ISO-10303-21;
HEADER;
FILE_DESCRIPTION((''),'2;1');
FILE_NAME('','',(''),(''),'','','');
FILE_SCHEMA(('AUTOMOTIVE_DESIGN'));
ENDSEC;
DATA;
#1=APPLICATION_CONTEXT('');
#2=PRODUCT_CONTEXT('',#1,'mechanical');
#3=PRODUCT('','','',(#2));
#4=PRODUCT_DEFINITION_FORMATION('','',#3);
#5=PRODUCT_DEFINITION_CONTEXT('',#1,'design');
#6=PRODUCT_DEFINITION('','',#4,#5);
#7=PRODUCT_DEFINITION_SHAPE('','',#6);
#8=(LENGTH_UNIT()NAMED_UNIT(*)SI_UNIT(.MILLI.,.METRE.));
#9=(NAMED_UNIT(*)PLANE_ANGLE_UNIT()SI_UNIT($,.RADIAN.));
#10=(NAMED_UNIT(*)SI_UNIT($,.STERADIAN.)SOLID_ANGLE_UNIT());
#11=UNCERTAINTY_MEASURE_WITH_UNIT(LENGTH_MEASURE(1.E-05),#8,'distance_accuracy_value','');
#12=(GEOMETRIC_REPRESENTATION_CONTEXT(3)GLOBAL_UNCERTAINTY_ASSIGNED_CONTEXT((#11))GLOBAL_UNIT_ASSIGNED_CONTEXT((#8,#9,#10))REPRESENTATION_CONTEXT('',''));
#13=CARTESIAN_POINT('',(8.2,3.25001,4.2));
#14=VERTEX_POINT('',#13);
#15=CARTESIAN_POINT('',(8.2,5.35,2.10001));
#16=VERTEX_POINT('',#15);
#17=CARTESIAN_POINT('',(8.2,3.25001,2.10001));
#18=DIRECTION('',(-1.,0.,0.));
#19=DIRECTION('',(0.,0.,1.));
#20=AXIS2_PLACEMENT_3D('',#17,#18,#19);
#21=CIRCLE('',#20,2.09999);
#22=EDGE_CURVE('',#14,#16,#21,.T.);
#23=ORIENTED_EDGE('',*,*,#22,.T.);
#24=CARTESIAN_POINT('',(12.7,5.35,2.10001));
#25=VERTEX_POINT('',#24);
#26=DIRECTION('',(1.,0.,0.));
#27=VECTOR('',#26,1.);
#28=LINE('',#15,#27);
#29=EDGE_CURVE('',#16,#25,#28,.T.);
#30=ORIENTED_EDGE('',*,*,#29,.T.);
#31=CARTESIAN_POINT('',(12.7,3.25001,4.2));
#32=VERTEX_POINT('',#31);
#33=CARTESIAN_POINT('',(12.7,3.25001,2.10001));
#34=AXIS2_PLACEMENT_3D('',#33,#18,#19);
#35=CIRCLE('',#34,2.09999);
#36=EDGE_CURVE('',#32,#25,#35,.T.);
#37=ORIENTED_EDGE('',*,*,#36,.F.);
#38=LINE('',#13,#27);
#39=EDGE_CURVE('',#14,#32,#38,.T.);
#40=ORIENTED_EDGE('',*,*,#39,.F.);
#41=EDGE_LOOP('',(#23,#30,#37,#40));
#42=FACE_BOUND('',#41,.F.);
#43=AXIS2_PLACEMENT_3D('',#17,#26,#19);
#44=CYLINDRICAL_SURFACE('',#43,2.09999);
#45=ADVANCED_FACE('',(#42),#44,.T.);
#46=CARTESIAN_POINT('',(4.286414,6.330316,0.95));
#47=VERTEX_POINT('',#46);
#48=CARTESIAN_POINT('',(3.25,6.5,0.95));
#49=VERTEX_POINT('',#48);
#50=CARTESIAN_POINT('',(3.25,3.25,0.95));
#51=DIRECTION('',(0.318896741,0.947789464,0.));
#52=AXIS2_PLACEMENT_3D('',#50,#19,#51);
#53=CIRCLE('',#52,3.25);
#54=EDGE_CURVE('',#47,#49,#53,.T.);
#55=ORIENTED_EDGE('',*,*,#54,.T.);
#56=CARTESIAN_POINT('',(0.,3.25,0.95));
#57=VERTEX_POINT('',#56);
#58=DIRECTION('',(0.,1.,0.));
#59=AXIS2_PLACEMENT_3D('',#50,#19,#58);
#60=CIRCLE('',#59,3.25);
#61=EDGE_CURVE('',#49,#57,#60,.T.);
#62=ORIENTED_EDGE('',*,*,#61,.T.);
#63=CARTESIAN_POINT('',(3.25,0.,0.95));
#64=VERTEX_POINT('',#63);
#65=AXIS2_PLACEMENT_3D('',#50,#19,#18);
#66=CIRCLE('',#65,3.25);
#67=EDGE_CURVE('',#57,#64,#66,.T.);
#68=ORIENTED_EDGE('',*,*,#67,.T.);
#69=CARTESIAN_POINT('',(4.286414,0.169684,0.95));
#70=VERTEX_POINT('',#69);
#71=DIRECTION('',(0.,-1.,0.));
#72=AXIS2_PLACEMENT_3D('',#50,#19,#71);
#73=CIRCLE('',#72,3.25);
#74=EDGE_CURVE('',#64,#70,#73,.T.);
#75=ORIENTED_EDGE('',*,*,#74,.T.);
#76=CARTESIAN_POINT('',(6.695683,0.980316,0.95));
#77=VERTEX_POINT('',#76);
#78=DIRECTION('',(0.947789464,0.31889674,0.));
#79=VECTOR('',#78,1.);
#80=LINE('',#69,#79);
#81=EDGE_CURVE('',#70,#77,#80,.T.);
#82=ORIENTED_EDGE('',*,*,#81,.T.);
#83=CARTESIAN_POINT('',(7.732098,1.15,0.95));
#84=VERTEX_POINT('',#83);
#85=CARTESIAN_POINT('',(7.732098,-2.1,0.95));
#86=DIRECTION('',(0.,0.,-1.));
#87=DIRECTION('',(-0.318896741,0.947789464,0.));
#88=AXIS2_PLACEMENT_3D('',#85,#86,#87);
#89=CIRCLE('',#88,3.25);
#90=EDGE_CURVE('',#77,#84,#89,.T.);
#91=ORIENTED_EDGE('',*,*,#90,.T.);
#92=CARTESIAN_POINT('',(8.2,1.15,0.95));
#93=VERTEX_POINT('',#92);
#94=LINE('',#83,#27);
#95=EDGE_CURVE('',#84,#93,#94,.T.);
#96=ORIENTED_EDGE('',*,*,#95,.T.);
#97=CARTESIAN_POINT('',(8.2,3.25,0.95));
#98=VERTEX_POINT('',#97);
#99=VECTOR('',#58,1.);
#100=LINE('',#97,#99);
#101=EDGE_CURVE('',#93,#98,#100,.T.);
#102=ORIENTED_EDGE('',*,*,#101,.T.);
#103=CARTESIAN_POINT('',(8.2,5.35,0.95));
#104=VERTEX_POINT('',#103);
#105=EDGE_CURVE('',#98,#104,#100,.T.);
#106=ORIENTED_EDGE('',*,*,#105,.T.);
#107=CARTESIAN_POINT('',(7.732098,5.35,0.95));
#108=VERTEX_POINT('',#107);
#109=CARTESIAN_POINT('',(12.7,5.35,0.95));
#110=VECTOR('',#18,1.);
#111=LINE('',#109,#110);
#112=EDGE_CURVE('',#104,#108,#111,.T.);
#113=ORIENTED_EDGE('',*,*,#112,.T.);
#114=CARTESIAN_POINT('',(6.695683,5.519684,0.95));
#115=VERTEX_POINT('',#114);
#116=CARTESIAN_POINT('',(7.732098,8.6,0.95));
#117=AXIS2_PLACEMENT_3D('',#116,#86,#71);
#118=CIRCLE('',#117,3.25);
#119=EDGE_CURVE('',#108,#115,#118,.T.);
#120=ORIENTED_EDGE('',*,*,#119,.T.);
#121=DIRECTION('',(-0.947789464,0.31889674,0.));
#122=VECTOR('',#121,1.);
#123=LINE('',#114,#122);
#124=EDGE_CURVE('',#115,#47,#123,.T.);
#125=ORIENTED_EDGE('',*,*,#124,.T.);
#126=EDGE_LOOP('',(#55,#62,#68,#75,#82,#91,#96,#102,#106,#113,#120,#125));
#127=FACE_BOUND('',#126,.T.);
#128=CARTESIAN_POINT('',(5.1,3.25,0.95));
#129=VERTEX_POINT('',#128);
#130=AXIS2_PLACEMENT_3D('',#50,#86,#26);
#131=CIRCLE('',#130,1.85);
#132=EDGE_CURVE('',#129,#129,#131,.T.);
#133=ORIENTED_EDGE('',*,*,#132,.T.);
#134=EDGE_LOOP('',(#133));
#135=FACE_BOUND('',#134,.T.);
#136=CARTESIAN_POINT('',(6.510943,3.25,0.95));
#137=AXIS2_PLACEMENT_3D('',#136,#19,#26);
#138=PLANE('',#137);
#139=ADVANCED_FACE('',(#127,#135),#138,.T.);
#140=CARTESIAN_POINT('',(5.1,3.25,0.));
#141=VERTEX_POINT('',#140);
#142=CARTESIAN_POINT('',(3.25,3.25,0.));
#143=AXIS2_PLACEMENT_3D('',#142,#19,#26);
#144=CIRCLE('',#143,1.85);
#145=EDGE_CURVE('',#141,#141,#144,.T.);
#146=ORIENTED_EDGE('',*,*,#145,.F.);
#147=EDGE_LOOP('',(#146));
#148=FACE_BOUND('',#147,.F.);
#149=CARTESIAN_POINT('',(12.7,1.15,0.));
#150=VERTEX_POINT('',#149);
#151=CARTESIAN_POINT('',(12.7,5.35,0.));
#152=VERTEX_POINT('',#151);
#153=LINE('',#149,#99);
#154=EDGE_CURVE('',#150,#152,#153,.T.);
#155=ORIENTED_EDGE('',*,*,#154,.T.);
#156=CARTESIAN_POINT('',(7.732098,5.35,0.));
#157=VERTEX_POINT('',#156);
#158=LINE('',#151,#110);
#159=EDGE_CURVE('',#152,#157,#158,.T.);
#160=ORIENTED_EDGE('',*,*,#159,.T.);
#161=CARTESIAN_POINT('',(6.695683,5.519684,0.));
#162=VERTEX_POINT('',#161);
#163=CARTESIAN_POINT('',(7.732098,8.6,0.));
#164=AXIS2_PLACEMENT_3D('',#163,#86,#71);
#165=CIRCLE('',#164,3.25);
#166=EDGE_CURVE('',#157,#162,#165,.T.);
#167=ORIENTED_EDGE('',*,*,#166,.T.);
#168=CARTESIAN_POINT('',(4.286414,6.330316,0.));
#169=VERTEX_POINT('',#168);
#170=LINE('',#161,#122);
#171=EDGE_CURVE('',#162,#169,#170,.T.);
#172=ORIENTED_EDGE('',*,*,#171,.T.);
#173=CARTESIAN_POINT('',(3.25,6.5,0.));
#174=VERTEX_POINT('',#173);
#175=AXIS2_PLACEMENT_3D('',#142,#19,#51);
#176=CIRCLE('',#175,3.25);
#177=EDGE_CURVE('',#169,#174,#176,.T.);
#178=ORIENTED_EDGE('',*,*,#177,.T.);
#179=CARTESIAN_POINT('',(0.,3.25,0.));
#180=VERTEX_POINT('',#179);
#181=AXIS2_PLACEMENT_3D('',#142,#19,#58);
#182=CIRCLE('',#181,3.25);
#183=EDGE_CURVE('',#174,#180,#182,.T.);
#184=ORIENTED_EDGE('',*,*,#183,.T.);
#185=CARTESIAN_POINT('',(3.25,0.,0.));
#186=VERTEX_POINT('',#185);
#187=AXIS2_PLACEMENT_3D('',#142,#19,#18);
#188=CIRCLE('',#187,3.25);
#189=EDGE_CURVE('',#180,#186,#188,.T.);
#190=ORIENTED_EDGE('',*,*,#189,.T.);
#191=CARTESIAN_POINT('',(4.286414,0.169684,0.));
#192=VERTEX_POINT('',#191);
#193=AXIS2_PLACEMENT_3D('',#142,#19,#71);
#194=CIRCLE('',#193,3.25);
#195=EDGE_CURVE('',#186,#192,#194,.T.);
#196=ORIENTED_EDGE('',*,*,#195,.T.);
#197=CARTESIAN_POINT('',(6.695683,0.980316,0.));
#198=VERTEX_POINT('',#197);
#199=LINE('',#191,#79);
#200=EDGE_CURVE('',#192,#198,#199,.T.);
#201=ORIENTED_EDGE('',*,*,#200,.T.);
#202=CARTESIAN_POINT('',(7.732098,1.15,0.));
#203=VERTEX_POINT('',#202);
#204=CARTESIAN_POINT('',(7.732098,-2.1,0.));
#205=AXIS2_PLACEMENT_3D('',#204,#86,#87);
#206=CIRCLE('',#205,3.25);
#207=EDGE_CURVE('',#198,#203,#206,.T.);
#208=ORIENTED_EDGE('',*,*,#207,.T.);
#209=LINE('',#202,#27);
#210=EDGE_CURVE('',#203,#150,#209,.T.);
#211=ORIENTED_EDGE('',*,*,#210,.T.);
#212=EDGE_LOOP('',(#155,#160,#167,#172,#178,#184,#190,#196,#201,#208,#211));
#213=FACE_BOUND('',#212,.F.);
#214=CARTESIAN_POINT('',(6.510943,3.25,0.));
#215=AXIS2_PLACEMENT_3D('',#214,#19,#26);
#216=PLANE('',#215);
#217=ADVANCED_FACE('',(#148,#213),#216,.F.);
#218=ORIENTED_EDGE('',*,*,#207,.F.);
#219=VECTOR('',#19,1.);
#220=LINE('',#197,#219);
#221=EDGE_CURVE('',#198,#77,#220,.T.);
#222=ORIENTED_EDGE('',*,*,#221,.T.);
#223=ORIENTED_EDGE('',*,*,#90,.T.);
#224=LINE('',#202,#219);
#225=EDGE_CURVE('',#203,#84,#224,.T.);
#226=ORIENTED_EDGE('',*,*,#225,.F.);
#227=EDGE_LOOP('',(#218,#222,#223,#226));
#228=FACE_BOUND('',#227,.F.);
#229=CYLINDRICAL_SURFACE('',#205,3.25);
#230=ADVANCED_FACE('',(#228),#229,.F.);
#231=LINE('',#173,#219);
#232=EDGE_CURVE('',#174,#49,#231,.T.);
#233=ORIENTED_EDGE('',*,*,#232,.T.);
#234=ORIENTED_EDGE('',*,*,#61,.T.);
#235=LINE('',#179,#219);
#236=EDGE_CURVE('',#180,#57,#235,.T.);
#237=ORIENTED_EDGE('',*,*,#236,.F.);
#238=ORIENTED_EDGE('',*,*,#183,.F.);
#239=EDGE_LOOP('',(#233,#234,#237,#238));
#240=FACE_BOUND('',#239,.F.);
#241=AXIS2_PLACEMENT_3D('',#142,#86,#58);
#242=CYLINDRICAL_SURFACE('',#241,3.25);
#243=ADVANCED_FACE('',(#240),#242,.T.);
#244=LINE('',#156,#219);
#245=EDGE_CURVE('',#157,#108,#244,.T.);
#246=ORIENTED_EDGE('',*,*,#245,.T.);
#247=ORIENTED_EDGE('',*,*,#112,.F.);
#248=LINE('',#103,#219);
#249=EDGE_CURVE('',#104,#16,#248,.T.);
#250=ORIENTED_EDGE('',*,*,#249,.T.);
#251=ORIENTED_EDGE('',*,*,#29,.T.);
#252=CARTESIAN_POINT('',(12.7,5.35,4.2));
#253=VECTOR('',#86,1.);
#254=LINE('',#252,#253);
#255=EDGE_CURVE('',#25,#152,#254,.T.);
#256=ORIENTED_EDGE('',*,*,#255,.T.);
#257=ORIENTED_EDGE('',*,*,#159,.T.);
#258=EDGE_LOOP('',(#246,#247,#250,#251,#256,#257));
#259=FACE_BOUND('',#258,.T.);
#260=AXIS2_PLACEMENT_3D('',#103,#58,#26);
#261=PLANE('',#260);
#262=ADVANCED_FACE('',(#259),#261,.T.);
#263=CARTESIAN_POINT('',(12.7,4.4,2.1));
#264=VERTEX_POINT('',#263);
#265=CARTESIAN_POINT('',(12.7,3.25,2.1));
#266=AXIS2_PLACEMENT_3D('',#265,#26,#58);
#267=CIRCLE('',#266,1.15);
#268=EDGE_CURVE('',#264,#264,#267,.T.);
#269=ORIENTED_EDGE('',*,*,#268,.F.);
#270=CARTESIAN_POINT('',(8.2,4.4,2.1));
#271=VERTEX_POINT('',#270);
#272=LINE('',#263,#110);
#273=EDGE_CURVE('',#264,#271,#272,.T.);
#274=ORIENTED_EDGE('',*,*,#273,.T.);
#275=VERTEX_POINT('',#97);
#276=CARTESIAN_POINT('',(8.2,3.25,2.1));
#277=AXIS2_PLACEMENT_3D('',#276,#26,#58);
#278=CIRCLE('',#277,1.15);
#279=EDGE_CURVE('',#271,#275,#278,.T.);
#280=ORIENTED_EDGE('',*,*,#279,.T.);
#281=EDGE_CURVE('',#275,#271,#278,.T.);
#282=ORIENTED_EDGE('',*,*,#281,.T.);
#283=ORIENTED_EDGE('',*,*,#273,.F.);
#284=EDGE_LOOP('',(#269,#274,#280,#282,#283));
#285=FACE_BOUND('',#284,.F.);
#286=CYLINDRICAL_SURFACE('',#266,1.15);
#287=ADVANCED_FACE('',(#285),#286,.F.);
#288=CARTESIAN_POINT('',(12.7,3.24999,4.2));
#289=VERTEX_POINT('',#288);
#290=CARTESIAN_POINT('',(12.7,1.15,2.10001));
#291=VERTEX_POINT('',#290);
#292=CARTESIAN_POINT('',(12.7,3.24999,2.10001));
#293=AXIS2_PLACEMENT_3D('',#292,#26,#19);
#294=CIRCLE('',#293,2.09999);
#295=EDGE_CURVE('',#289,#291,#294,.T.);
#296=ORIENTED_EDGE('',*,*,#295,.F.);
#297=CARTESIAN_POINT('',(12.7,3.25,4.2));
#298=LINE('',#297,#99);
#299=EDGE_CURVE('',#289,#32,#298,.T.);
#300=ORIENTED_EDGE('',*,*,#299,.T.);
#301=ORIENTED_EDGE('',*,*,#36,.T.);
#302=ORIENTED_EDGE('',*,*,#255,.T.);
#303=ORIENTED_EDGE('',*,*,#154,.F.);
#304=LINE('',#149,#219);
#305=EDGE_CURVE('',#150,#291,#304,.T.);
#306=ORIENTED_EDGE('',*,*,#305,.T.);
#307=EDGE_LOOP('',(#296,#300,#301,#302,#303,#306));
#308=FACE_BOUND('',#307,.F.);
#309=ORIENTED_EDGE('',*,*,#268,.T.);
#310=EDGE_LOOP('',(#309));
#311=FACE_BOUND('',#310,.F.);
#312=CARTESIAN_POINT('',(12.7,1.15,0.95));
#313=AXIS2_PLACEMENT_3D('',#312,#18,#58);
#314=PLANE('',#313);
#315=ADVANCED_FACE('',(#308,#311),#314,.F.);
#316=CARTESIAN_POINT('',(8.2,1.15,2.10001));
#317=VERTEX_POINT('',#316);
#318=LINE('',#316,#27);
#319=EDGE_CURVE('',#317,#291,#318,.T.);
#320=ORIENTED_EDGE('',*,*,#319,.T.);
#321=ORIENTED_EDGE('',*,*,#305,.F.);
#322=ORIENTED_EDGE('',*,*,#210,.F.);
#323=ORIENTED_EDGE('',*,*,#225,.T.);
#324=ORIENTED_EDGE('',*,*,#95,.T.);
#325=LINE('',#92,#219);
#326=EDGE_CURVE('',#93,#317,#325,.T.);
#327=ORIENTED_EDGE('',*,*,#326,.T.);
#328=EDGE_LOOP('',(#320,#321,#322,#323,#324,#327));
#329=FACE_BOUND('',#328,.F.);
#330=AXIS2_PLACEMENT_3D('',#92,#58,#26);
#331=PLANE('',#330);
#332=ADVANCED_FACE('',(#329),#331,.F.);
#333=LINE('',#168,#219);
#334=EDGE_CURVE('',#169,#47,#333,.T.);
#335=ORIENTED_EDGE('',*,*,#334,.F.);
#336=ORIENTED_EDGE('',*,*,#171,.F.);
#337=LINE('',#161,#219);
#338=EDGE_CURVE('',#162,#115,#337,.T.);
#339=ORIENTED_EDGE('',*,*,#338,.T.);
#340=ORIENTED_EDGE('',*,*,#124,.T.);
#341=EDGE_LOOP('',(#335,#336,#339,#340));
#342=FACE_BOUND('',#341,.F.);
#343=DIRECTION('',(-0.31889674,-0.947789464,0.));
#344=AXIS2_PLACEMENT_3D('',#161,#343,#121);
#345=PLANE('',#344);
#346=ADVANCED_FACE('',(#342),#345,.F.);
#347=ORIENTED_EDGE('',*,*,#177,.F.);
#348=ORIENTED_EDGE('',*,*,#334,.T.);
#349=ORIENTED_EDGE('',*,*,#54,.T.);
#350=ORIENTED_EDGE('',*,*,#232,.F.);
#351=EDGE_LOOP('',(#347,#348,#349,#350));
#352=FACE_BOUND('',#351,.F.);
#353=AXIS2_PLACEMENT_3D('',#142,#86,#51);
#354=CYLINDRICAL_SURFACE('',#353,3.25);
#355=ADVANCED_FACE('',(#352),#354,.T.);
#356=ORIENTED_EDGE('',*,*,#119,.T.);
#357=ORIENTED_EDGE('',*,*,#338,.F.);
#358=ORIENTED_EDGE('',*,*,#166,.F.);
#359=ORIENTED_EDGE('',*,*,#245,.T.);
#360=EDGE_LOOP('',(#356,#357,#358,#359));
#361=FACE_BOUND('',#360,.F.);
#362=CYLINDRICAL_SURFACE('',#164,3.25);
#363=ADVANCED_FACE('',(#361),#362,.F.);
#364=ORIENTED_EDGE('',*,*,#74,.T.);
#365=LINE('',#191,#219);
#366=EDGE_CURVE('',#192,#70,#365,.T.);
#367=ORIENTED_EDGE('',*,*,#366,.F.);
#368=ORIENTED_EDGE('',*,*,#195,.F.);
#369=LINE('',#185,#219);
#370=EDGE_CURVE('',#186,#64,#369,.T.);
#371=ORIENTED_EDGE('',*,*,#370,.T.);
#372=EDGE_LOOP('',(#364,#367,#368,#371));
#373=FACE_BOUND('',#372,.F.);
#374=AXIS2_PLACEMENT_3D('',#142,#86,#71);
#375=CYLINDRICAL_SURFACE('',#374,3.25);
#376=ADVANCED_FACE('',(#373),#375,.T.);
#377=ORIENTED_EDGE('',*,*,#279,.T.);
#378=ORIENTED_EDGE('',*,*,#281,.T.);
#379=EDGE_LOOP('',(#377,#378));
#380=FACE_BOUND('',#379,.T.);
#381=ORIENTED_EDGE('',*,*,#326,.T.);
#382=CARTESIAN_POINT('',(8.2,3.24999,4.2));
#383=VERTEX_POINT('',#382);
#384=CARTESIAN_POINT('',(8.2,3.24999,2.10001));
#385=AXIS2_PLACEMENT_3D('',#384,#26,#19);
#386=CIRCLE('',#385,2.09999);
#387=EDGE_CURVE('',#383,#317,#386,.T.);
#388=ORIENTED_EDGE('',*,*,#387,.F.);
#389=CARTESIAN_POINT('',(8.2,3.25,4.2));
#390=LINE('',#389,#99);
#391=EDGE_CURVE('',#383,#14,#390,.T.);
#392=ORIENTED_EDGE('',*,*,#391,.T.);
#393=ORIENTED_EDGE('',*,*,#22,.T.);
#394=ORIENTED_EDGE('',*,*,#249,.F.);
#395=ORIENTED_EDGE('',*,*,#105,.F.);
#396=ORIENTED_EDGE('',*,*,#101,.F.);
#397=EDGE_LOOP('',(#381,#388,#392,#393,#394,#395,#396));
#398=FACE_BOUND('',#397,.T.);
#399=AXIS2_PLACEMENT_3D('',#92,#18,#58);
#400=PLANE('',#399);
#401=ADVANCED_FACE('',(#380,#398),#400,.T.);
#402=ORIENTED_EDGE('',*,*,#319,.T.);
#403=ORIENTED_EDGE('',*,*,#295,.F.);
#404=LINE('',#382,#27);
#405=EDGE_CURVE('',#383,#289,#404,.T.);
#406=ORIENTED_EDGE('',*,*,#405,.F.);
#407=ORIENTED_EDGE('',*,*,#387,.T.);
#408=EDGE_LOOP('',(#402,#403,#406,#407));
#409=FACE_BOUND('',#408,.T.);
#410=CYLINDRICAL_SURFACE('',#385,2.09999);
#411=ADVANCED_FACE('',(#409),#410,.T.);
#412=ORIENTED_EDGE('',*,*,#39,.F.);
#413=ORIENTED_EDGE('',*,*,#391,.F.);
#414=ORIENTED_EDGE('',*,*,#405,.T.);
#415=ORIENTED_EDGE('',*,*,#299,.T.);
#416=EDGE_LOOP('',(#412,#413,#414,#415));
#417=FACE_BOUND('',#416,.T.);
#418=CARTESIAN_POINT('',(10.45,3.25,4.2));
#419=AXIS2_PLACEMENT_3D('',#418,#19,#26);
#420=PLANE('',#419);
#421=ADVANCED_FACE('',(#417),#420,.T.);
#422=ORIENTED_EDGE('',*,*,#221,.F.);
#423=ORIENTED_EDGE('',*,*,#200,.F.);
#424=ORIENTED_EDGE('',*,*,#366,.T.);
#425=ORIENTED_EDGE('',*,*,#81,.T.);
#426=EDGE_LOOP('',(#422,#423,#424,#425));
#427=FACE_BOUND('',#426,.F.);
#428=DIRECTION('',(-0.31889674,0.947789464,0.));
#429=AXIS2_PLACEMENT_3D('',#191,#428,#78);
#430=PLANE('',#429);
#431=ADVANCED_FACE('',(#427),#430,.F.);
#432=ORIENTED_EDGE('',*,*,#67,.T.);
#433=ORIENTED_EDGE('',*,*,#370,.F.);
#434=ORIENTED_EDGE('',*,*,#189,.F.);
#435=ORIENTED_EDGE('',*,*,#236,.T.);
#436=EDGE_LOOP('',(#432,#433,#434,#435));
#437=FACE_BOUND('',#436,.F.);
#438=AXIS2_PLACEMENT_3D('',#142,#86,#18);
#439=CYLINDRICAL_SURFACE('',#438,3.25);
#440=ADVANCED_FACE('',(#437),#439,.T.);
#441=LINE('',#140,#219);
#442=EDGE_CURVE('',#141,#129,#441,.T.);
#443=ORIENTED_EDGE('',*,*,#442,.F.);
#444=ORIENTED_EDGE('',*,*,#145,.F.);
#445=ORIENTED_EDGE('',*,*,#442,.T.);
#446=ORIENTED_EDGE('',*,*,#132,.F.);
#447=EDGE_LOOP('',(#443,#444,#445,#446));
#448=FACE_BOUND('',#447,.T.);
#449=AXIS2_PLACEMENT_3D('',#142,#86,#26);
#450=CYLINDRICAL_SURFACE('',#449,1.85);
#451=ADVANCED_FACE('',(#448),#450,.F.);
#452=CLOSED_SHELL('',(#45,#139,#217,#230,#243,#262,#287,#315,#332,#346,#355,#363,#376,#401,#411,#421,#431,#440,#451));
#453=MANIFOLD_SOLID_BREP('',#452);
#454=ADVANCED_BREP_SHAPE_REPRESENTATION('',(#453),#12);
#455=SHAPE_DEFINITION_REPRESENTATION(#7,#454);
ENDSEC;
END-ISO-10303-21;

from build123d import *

# Parameters (mm, degrees)
F0_R     = 1.85
F1_DEPTH = 0.95
F2_W     = 4.5
F2_H     = 4.2
F3_DEPTH = 3.25
F4_R     = 2.09999
F5_R     = 1.15
F6_DEPTH = 25


# Not quite as in the source:
# - a fillet or chamfer is up to 0.001 mm smaller than in the source, because OpenCascade refuses the exact size


with BuildPart() as f1:
    # F0 (on Top) → F1 (new body)
    with BuildSketch(Plane.XY):
        with BuildLine():
            Line((8.2, 1.15), (12.7, 1.15))
            Line((12.7, 1.15), (12.7, 5.35))
            Line((12.7, 5.35), (8.2, 5.35))
            Line((8.2, 5.35), (7.7320977576, 5.35))
            ThreePointArc((7.7320977576, 5.35), (7.2069912058, 5.3927015871), (6.6956833513, 5.5196842405))
            Line((6.6956833513, 5.5196842405), (4.2864144063, 6.3303157595))
            ThreePointArc((4.2864144063, 6.3303157595), (3.7751065518, 6.4572984129), (3.25, 6.5))
            ThreePointArc((3.25, 6.5), (0.9519029611, 5.5480970389), (0, 3.25))
            ThreePointArc((0, 3.25), (0.9519029611, 0.9519029611), (3.25, 0))
            ThreePointArc((3.25, 0), (3.7751065518, 0.0427015871), (4.2864144063, 0.1696842405))
            Line((4.2864144063, 0.1696842405), (6.6956833513, 0.9803157595))
            ThreePointArc((6.6956833513, 0.9803157595), (7.2069912058, 1.1072984129), (7.7320977576, 1.15))
            Line((7.7320977576, 1.15), (8.2, 1.15))
        make_face()
        with Locations((3.25, 3.25)):
            Circle(F0_R, mode=Mode.SUBTRACT)
    extrude(amount=F1_DEPTH)

    # F2 (on face) → F3 (join)
    with BuildSketch(Plane.XY.offset(0.95)):
        with Locations((10.45, 3.25)):
            Rectangle(F2_W, F2_H)
    extrude(amount=F3_DEPTH)

    # F4 (radius 2.1 in the source; OpenCascade refuses exactly that, so slightly less here)
    f4_edges = [f1.edges().sort_by_distance(p)[0] for p in [
        (10.45, 5.35, 4.2),
        (10.45, 1.15, 4.2),
    ]]
    fillet(f4_edges, radius=F4_R)

    # F5 (on face) → F6 (cut)
    with BuildSketch(Plane.YZ.offset(12.7)):
        with Locations((3.25, 2.1)):
            Circle(F5_R)
    extrude(amount=-F6_DEPTH, mode=Mode.SUBTRACT)


solid = f1.part
